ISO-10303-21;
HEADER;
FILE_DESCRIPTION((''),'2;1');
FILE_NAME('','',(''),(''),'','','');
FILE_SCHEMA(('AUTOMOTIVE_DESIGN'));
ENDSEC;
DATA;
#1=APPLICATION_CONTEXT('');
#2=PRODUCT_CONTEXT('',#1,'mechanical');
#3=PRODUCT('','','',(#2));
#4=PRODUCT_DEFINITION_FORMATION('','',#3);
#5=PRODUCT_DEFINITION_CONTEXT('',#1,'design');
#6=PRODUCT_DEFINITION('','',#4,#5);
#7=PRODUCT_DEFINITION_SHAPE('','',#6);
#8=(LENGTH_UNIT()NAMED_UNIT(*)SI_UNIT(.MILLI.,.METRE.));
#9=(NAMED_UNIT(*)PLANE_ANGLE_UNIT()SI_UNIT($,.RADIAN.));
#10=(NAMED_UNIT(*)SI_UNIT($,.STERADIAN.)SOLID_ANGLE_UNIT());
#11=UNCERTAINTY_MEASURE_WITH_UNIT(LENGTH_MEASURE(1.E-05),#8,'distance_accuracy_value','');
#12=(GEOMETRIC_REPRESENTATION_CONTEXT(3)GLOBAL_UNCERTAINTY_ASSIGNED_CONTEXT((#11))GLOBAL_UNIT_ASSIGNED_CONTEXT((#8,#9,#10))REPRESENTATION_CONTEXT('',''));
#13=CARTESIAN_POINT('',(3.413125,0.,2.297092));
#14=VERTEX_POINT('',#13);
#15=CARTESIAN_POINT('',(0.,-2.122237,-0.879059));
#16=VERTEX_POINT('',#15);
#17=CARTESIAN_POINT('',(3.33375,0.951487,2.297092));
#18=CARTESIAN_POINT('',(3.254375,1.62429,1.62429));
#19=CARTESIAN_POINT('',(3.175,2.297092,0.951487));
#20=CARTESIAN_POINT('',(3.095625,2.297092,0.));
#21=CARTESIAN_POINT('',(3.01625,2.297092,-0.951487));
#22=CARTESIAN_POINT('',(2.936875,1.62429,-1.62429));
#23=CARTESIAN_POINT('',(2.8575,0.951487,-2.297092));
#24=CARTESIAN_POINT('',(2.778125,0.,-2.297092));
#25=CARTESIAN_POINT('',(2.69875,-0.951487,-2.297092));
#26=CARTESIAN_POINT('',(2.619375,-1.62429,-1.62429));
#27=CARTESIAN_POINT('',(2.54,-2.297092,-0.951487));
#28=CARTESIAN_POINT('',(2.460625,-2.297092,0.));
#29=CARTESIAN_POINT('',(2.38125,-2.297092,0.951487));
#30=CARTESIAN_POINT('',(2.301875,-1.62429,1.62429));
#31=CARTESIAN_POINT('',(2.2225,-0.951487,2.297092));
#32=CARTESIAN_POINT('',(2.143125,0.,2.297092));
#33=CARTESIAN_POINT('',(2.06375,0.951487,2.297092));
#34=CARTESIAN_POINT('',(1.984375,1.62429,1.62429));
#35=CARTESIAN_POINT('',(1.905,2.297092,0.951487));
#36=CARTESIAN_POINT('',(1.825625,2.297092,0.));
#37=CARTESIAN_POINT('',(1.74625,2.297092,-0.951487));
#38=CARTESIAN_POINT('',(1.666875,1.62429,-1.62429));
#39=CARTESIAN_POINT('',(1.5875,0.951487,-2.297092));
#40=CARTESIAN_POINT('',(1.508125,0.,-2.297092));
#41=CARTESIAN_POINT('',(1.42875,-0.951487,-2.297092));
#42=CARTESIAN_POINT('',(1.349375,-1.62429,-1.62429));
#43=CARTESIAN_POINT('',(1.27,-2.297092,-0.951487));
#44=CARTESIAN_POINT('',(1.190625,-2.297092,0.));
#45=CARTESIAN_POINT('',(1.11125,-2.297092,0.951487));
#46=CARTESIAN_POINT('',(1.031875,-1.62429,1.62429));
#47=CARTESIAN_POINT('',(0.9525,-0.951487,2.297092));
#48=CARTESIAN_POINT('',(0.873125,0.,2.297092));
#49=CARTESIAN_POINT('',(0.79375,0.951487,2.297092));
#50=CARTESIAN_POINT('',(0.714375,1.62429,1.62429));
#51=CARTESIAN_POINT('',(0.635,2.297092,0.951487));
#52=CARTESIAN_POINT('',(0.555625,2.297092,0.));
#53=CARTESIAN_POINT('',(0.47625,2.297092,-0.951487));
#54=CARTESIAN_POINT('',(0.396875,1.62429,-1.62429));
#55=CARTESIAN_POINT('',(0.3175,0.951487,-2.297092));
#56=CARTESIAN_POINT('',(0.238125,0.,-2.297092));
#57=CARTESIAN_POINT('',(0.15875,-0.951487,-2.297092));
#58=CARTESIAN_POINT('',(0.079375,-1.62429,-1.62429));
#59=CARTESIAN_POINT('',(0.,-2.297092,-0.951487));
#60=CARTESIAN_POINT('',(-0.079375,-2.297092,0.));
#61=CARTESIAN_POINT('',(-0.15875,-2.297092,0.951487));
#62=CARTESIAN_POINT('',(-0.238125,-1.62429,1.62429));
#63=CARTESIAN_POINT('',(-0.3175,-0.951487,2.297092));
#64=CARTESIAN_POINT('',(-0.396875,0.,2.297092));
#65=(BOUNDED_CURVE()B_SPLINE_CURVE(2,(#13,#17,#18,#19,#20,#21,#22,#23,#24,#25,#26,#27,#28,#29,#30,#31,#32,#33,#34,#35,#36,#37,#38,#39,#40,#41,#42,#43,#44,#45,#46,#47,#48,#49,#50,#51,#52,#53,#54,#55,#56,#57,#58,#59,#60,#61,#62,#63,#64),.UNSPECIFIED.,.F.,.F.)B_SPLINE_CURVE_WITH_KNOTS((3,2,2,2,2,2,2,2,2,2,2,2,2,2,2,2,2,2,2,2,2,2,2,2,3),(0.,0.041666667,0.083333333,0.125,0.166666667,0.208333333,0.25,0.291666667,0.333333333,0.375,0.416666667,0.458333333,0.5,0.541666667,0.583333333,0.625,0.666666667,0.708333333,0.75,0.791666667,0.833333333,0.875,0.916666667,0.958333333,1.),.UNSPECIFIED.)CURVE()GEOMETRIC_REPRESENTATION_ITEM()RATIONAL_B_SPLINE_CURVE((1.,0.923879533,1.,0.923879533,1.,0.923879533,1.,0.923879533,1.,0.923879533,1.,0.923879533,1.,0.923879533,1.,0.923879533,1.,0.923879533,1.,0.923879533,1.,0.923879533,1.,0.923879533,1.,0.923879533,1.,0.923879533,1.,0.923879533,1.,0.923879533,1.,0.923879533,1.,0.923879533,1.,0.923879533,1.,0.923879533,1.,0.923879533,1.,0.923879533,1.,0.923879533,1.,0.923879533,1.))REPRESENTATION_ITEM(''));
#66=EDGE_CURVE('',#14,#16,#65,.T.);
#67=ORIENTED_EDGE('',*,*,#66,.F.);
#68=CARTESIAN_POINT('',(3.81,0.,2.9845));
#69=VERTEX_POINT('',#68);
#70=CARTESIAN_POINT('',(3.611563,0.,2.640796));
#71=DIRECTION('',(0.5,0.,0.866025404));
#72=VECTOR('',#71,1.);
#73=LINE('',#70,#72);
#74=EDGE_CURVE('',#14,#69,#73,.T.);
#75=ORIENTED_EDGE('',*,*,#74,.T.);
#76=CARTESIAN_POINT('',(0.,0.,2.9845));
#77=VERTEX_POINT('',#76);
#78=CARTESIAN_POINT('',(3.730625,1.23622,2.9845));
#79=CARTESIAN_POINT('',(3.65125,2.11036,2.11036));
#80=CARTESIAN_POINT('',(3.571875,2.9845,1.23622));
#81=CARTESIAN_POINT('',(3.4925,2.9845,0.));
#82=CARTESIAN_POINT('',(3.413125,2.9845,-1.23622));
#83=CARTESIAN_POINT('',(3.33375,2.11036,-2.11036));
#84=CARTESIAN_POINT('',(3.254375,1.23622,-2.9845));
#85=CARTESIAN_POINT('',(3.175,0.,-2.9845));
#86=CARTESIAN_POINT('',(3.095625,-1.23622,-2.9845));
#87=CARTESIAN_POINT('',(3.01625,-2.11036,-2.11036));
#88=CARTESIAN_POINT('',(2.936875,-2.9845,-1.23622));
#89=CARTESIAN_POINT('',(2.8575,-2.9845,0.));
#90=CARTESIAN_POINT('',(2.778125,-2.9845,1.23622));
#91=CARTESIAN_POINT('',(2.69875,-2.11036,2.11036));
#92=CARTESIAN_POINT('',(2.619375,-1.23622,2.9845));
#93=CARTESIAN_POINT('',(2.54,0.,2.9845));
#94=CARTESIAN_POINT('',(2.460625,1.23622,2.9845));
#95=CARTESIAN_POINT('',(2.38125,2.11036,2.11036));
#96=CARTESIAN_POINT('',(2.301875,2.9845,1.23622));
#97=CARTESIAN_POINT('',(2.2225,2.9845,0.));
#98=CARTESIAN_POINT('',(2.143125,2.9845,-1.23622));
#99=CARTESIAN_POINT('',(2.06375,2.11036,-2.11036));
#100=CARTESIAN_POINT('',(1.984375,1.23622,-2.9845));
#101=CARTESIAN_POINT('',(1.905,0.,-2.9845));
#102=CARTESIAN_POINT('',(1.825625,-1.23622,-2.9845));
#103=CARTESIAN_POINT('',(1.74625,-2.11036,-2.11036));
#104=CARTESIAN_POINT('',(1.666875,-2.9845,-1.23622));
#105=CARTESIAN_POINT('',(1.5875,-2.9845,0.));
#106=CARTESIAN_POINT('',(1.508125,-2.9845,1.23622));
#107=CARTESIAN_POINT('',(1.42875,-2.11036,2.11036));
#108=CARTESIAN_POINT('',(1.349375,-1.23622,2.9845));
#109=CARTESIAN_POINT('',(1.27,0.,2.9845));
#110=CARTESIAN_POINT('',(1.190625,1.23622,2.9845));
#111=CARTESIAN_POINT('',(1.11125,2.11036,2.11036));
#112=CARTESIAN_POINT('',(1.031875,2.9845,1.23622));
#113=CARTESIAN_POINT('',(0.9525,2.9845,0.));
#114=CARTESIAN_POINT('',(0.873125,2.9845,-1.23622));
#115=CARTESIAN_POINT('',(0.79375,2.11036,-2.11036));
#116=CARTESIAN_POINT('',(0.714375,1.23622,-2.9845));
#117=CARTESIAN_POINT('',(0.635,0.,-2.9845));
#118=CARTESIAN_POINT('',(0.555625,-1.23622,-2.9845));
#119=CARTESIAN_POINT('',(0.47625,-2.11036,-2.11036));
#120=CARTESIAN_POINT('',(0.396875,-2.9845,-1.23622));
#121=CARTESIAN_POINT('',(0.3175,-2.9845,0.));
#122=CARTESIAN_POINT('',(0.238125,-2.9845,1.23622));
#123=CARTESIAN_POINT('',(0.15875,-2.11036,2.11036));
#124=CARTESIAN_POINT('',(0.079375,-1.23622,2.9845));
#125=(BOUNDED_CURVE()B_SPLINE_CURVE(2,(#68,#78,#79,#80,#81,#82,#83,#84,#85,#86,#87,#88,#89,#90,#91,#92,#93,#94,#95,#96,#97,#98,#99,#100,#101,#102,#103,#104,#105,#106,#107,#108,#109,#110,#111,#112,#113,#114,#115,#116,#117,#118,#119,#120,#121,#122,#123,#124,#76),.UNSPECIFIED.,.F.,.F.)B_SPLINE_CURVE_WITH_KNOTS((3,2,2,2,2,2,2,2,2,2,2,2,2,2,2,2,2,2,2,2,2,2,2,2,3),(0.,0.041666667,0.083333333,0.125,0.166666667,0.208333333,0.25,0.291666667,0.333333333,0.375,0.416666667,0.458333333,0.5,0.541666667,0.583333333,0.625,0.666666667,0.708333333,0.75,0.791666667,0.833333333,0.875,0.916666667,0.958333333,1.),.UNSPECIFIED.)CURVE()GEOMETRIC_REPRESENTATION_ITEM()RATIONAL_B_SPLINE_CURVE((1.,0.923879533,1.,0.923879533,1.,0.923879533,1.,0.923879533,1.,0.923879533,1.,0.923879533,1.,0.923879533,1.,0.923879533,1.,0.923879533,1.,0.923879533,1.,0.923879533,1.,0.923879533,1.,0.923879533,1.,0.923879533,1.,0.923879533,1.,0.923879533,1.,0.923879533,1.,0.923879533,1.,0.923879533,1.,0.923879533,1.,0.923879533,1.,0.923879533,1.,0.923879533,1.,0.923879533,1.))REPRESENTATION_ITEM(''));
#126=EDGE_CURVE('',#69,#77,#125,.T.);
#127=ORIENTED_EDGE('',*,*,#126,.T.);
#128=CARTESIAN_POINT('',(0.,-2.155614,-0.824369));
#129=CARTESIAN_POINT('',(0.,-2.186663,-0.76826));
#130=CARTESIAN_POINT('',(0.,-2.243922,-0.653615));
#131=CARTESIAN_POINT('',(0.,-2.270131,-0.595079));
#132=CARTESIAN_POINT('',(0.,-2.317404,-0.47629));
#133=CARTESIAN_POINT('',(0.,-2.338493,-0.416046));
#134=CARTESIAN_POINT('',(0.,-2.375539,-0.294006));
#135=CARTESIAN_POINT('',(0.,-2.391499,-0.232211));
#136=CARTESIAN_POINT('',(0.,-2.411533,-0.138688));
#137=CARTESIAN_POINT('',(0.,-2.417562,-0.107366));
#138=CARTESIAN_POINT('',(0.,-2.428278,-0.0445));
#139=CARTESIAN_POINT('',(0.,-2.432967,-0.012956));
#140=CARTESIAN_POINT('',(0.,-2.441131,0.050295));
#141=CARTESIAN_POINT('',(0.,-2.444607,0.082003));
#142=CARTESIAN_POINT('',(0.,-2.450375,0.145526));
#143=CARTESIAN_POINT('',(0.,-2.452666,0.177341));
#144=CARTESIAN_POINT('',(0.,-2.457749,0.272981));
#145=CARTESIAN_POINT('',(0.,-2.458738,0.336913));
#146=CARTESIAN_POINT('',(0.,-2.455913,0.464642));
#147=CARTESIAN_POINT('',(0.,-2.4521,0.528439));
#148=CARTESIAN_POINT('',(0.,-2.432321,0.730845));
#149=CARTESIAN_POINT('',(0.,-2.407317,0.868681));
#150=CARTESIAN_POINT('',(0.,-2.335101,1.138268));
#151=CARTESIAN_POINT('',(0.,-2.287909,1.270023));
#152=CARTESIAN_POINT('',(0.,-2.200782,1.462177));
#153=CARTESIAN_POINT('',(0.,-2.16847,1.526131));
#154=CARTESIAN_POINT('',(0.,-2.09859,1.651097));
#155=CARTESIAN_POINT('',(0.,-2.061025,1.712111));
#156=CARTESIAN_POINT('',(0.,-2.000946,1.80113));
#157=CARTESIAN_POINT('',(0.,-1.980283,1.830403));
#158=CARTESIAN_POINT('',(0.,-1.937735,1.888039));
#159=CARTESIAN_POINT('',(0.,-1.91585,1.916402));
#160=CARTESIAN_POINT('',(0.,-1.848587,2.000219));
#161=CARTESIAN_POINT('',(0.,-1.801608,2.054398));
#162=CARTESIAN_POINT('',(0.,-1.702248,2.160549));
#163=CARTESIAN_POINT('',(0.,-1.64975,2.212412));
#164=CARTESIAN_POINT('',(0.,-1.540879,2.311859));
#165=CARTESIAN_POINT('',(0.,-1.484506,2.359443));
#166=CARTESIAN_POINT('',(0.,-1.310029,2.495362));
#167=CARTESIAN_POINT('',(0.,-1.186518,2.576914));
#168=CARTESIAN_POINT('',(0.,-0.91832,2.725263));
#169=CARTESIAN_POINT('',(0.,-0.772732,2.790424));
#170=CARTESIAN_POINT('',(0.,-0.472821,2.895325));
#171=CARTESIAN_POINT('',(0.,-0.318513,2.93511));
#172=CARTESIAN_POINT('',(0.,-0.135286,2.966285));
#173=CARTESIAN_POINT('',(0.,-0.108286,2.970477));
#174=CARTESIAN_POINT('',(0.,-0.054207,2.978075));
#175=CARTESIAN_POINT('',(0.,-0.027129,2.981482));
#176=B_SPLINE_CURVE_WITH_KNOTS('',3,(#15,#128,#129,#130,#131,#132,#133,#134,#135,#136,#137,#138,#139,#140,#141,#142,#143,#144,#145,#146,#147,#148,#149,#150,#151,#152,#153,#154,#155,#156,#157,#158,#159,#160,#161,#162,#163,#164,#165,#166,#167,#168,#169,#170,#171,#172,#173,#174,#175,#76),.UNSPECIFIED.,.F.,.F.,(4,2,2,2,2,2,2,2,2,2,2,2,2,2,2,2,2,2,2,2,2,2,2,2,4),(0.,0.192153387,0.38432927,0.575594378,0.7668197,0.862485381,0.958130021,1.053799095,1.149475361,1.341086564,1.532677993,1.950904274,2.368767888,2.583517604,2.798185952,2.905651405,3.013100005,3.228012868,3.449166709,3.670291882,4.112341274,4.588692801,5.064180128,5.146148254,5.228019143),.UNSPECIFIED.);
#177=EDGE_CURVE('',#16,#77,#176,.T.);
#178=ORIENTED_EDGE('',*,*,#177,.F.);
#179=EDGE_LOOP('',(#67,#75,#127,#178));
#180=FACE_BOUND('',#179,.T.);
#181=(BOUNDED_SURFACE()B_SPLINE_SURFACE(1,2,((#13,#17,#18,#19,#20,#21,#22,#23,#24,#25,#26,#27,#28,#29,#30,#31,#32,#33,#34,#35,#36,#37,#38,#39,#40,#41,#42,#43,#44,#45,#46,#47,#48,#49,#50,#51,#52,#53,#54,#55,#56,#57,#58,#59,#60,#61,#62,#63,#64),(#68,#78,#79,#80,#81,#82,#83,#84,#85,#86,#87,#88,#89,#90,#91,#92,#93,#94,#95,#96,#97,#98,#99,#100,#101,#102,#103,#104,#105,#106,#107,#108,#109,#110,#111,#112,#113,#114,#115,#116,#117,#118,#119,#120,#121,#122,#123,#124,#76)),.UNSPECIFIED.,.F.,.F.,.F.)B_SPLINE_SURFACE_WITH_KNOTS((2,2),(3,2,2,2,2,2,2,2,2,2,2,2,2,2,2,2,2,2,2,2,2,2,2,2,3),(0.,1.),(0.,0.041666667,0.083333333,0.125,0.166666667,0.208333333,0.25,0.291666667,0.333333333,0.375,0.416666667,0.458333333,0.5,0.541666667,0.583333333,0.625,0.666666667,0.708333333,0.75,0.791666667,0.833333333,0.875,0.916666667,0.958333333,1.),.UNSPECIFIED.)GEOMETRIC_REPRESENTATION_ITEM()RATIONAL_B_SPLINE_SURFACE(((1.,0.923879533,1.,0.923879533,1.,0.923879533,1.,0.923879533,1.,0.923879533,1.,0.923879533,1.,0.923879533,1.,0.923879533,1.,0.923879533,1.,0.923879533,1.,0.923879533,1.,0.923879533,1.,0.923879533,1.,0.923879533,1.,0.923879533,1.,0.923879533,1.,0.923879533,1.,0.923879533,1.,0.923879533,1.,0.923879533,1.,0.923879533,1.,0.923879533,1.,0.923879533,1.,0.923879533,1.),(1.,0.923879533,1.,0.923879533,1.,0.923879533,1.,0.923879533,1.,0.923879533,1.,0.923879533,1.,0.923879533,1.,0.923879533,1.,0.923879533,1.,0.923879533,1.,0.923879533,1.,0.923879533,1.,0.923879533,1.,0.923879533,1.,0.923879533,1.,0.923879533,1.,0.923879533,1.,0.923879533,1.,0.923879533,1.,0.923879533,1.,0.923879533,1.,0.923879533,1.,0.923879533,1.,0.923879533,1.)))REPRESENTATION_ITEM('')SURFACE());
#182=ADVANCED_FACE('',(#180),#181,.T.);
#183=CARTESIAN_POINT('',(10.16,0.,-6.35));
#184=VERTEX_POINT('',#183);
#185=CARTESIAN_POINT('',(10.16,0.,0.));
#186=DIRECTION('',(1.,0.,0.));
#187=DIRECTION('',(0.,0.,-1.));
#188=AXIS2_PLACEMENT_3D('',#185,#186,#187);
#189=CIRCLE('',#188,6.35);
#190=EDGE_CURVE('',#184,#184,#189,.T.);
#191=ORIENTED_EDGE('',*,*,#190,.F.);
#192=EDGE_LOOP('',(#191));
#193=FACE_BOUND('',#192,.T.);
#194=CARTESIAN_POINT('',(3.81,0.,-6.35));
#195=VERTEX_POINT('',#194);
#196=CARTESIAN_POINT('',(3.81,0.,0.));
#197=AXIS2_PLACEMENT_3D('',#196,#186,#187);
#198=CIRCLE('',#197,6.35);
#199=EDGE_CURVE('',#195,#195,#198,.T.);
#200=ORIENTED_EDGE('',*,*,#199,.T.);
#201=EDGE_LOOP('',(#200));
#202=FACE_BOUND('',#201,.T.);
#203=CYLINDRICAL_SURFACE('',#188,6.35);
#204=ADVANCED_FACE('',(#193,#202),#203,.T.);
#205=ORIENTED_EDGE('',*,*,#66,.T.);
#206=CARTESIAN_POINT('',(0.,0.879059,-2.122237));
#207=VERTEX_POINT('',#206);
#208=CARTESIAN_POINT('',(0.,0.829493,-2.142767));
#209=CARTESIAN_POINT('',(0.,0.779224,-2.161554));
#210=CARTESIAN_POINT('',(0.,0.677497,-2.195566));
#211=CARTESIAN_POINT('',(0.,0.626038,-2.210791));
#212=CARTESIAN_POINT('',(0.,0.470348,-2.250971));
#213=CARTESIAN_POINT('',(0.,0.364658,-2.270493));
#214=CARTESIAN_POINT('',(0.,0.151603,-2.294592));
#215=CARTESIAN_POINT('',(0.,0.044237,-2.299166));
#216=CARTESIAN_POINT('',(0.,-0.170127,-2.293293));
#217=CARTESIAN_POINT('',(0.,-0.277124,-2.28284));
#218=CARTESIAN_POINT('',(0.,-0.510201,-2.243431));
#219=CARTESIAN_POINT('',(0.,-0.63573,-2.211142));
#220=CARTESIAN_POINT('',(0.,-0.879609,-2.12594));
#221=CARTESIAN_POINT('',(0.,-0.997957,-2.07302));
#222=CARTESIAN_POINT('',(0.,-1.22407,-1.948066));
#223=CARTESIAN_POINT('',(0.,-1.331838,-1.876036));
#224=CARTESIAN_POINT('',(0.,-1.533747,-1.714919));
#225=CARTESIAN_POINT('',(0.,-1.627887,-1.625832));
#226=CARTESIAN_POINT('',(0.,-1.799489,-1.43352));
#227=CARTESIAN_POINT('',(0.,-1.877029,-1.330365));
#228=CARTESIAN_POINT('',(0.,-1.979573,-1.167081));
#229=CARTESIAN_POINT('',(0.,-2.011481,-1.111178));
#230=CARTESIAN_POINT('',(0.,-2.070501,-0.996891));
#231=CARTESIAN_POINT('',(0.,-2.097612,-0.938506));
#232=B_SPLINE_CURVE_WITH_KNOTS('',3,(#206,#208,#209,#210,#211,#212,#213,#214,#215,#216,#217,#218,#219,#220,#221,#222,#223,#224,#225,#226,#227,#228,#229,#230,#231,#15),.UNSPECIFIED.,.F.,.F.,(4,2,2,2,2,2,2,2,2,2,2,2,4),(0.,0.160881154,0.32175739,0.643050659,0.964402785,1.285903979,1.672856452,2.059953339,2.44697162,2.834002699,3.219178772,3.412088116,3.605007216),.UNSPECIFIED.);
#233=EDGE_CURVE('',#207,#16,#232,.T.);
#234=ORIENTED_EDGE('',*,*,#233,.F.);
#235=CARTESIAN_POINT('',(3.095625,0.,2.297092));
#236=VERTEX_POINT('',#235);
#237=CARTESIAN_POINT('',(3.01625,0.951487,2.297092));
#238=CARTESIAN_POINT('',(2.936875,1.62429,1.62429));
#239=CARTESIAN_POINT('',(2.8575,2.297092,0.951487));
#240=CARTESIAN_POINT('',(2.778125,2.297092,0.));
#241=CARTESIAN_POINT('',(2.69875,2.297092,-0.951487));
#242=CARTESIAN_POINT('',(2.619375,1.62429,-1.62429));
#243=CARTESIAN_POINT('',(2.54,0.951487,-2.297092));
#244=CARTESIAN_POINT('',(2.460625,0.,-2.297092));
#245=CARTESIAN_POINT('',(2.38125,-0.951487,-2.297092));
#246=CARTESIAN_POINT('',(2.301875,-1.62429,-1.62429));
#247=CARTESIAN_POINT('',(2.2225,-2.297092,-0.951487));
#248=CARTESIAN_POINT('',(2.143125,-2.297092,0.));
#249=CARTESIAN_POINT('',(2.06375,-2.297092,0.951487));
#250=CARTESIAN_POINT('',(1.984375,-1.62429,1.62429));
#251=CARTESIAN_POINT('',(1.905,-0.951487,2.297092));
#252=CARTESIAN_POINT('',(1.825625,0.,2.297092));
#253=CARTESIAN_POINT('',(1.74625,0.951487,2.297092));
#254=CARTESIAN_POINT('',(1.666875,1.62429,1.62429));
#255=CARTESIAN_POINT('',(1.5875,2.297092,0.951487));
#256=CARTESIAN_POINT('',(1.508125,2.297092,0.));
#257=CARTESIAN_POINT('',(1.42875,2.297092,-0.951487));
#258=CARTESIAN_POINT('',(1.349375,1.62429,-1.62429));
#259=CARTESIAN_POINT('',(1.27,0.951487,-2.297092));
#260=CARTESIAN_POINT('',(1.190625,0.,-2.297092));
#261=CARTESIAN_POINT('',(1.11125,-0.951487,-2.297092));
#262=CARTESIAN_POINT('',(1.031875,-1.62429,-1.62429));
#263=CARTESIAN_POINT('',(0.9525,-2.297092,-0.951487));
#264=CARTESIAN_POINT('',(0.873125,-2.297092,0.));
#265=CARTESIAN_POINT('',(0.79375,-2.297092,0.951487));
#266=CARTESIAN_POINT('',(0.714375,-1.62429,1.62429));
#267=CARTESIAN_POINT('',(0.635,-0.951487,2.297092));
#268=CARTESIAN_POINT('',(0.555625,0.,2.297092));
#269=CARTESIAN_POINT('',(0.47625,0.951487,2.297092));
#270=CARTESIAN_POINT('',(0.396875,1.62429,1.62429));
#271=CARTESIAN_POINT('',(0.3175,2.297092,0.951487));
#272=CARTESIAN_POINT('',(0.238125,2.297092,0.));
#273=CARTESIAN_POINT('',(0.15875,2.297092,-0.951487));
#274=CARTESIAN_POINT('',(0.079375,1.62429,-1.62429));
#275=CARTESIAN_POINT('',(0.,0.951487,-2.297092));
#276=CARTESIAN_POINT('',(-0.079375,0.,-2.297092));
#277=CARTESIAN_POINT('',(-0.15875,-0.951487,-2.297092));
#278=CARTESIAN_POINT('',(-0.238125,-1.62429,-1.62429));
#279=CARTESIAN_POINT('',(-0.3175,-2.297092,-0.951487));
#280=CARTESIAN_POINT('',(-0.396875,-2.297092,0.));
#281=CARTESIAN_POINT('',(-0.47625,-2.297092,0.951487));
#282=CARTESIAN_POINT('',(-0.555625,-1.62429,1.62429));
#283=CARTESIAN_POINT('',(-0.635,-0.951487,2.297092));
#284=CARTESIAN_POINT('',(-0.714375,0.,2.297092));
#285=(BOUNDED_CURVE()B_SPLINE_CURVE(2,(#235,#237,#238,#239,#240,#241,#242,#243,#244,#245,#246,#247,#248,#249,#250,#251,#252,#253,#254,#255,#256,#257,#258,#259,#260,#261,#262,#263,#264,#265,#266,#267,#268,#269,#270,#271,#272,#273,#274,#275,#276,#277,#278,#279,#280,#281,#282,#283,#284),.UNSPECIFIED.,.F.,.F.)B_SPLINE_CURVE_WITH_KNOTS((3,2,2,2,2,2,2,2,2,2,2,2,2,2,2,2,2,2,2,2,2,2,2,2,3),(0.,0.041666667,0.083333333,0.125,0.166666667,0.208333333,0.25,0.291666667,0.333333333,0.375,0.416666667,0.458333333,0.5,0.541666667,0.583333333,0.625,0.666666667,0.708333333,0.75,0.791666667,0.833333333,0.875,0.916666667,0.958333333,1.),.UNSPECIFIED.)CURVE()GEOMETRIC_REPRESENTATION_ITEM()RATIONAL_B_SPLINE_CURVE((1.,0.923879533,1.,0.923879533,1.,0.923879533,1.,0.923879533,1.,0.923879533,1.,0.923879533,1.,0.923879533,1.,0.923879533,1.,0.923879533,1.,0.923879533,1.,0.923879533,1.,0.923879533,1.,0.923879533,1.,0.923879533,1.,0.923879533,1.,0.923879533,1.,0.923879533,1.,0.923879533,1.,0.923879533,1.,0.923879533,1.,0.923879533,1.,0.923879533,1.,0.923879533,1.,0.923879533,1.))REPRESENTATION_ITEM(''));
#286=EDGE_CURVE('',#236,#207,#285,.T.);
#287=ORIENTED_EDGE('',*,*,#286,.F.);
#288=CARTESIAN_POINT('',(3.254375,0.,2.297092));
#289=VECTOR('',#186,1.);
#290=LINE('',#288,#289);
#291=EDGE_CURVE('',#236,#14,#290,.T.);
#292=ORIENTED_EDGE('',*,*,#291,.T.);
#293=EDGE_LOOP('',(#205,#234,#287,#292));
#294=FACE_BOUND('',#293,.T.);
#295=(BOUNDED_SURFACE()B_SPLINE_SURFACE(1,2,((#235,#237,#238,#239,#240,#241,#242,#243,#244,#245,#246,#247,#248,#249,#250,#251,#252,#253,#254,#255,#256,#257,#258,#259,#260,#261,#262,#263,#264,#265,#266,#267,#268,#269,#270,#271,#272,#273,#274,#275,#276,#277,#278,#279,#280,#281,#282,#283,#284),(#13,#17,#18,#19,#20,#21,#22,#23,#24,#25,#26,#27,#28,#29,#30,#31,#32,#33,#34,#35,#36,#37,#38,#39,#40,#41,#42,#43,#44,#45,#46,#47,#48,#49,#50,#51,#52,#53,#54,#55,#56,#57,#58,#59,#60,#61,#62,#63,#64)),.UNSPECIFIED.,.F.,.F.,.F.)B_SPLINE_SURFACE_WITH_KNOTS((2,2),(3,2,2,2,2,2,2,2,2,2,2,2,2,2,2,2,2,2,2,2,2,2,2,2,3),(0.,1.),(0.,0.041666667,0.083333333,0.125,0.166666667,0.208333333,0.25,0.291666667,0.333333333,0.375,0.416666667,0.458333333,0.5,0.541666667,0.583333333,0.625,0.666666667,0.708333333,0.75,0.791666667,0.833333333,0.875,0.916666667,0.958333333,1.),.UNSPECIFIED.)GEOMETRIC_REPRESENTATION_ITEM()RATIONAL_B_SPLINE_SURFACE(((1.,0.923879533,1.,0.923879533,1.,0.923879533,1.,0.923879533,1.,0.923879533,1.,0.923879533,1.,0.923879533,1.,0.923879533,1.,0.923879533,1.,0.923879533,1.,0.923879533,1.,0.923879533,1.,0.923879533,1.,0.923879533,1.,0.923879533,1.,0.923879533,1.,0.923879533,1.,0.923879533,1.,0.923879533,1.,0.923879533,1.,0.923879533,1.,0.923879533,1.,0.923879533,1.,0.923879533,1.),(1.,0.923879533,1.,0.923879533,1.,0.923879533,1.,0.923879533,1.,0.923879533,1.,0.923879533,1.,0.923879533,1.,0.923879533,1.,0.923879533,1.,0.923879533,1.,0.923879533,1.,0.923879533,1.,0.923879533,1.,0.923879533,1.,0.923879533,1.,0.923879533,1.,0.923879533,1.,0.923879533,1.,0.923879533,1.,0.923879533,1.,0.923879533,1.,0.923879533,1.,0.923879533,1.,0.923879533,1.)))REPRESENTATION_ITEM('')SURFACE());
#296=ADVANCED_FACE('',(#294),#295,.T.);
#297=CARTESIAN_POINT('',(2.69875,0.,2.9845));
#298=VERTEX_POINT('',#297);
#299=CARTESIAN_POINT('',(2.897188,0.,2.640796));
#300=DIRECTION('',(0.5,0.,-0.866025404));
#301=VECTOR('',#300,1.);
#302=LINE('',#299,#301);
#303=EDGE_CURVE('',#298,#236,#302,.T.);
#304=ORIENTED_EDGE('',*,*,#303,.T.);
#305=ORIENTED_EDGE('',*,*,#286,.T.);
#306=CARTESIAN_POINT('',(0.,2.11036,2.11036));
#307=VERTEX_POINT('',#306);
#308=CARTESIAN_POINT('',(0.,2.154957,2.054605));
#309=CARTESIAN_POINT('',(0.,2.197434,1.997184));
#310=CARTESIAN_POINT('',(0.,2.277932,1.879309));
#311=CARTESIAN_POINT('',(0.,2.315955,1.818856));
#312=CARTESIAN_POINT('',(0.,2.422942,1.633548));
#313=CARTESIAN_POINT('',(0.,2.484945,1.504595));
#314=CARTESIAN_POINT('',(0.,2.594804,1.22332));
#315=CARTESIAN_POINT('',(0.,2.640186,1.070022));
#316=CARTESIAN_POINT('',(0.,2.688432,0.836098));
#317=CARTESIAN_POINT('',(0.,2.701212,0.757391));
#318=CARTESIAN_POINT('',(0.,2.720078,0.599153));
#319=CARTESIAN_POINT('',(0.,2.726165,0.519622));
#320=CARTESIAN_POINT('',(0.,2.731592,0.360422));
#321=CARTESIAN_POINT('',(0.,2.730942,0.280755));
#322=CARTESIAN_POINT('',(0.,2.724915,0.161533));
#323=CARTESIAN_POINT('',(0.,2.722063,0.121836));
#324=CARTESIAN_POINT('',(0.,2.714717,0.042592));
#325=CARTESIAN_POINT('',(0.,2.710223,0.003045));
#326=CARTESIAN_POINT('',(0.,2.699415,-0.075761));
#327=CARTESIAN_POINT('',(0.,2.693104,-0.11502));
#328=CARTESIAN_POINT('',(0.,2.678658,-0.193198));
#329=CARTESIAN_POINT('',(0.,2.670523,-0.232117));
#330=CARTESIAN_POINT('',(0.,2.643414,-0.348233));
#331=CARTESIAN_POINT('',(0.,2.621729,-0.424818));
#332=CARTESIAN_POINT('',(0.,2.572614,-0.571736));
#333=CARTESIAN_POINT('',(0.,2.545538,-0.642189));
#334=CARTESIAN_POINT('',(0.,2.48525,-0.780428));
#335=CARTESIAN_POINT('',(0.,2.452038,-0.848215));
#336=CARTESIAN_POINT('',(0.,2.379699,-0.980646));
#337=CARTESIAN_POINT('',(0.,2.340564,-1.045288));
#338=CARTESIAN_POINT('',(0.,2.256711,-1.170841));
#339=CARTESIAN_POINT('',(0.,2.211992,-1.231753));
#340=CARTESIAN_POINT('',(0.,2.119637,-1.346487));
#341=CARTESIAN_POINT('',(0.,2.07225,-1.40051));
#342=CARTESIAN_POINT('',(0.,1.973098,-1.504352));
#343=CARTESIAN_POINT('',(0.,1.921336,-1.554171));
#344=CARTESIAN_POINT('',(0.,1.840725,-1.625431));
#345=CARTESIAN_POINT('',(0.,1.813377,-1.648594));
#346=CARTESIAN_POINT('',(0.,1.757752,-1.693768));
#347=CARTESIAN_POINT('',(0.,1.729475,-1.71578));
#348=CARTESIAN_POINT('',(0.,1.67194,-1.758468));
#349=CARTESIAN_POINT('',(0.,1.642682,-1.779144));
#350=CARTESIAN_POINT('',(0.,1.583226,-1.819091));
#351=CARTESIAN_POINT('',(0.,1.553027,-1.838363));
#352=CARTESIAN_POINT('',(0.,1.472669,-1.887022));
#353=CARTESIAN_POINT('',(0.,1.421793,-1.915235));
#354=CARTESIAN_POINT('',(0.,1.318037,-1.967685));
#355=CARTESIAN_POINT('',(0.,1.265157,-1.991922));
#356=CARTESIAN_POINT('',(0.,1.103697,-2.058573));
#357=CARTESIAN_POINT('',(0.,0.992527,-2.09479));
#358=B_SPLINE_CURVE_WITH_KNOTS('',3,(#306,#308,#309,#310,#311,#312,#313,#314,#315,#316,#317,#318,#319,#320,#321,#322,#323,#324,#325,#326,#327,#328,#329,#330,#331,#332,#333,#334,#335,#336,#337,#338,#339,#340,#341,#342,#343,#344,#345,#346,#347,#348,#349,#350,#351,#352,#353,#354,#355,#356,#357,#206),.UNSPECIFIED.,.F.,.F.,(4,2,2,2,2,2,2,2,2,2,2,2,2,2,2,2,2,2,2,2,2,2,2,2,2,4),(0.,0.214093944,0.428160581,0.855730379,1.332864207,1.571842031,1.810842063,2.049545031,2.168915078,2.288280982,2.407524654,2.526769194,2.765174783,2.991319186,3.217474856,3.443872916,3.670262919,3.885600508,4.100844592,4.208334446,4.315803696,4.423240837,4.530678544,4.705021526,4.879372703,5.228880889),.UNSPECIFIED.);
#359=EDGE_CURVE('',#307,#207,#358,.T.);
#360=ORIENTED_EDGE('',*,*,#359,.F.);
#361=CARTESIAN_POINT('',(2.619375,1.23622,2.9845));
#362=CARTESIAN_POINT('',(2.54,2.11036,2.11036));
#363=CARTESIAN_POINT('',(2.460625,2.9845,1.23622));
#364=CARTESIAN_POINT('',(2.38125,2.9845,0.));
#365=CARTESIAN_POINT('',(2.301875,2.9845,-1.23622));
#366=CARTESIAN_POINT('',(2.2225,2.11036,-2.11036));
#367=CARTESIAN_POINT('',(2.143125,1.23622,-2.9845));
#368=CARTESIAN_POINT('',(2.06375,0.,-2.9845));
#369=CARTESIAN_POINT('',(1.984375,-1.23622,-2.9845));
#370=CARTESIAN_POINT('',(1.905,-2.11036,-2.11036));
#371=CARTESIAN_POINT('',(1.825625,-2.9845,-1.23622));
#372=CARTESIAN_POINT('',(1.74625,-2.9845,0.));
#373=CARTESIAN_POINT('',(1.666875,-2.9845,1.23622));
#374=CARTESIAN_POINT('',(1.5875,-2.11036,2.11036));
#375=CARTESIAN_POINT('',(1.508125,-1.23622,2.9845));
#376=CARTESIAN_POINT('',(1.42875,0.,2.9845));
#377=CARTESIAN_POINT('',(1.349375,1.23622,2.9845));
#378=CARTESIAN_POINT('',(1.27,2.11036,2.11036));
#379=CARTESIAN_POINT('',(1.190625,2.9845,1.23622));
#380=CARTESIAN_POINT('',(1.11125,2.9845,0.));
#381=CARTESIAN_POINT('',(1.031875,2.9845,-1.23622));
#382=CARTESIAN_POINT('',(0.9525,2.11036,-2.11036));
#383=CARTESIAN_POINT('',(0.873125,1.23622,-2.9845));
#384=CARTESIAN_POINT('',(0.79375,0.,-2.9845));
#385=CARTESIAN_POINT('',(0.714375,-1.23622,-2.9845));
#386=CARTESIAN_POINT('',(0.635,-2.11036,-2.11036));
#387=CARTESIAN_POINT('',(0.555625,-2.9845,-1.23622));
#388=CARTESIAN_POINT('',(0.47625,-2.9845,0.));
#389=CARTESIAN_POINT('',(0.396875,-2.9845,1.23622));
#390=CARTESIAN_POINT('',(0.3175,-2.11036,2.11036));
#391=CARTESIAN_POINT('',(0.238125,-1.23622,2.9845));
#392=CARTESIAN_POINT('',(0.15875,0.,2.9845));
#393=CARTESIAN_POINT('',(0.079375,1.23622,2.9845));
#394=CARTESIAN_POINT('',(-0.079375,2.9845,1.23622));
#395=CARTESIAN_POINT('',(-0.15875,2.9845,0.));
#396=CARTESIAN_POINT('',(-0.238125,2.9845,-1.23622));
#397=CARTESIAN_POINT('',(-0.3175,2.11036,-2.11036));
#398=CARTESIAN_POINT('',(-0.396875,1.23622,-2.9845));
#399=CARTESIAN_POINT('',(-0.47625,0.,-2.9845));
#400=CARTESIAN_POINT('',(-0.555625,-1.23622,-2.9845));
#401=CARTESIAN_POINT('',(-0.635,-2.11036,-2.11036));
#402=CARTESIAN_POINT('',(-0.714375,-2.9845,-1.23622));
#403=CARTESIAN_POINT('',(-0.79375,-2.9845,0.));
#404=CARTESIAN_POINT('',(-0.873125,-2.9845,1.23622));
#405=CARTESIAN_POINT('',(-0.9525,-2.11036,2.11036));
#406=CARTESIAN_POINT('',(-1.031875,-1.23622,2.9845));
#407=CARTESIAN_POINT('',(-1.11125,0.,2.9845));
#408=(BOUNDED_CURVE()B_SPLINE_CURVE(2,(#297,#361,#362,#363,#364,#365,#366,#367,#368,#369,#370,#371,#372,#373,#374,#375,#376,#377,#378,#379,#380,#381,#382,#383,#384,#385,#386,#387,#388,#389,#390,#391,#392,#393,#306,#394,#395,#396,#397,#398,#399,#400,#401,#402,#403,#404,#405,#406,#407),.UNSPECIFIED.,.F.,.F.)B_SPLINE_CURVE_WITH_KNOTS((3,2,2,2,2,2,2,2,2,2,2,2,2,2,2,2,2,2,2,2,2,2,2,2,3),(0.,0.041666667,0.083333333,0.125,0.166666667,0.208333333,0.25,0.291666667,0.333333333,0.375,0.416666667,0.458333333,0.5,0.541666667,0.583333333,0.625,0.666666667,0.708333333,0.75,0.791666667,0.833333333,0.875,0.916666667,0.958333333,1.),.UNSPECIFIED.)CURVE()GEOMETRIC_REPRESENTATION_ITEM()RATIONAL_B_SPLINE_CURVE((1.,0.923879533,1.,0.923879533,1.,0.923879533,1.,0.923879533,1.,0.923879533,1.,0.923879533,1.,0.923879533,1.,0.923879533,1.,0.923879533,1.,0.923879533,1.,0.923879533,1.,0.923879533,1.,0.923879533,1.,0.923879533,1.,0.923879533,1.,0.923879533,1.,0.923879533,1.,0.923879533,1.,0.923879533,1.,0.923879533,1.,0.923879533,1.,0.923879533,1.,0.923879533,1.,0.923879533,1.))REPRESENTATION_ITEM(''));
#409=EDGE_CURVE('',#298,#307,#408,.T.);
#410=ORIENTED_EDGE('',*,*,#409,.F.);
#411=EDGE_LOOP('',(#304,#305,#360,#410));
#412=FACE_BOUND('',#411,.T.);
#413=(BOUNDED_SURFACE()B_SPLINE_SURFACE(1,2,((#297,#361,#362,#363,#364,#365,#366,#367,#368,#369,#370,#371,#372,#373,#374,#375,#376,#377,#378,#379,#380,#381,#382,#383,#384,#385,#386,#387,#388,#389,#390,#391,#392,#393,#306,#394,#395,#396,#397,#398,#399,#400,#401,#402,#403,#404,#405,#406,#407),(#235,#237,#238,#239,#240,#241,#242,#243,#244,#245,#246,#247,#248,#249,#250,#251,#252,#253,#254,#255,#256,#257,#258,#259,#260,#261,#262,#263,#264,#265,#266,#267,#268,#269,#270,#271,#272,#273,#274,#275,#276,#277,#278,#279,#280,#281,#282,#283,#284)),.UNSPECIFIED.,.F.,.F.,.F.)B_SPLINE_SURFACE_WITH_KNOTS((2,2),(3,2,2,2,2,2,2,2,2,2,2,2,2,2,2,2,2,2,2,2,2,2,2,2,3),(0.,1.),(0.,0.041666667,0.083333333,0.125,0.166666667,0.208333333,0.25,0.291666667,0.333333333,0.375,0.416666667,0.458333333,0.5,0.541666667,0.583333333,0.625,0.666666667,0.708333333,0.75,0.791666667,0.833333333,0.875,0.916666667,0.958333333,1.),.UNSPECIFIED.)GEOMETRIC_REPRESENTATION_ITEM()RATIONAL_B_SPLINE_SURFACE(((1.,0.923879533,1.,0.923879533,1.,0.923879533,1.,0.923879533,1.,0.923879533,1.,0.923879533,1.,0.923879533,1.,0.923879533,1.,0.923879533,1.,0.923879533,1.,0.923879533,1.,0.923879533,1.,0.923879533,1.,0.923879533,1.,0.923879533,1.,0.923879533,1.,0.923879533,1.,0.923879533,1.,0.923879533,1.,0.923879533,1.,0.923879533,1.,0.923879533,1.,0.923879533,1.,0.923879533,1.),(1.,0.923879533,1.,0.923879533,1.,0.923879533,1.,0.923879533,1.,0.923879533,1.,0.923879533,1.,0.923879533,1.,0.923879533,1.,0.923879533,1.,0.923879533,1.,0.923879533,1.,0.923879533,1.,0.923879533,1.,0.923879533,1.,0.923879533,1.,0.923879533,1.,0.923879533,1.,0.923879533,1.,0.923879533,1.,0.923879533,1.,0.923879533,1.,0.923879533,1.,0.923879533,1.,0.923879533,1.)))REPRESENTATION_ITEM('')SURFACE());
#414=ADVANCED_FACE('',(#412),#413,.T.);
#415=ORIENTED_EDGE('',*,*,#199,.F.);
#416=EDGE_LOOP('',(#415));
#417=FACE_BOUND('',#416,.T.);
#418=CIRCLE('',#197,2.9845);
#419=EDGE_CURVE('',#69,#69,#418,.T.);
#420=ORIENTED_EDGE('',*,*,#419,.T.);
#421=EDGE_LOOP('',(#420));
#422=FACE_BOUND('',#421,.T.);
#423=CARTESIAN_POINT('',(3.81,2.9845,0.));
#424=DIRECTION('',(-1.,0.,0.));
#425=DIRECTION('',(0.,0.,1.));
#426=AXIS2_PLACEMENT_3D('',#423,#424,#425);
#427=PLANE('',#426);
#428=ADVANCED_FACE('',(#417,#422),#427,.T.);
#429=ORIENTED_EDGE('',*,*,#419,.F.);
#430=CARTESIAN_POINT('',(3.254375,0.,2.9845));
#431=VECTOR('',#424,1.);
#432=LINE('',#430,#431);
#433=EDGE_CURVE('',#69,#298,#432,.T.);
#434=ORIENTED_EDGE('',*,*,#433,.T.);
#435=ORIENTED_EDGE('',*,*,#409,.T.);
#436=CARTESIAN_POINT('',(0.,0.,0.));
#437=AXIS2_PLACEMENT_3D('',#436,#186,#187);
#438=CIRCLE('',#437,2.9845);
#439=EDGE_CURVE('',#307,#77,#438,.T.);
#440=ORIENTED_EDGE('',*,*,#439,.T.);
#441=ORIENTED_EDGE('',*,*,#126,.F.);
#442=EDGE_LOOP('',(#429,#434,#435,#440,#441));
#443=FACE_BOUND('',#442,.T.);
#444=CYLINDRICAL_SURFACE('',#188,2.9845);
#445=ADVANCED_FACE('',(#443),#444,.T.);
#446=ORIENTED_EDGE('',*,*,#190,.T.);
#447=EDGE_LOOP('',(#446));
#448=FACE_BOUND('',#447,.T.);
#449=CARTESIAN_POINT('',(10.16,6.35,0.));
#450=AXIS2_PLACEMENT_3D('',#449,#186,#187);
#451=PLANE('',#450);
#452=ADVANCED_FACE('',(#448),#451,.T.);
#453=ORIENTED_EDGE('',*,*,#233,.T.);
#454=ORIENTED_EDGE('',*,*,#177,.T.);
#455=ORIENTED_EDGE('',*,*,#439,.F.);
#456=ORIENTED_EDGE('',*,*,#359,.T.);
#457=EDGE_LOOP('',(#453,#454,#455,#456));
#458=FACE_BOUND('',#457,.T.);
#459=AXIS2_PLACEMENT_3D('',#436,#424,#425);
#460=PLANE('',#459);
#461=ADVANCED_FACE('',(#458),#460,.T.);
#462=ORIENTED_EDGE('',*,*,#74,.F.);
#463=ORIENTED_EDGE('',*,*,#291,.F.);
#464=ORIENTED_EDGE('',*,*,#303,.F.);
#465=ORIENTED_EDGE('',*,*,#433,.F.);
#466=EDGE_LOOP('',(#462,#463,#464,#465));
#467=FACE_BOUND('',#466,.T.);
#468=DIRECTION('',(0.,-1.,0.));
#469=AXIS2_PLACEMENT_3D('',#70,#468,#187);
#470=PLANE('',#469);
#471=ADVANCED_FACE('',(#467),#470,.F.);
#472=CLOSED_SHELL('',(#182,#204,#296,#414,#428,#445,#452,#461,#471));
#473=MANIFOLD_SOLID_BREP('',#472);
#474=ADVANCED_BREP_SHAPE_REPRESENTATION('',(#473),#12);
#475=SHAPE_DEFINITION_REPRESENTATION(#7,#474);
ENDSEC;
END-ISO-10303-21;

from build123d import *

# Parameters (mm, degrees)
THREAD1_PITCH = 1.27


with BuildPart() as part:
    # Sketch1 → Revolve1 (revolve)
    with BuildSketch(Plane.XY, mode=Mode.PRIVATE) as revolve1_sk:
        Polygon((0, 0), (0, 2.9845), (3.81, 2.9845), (3.81, 6.35), (10.16, 6.35), (10.16, 0), align=None)
    revolve(revolve1_sk.sketch.rotate(Axis((10.16, 0, 0), (-1, 0, 0)), 90), axis=Axis((10.16, 0, 0), (-1, 0, 0)))

    # Thread1: the profile of Thread Profile1 profile screwed along a right-hand helix of 3 turns, 8 arcs to a turn; built about Z, then put on its axis
    thread1_z = Axis((0, 0, 0), (0, 0, 1))
    thread1_corners = [(2.9848, 0, -0.000173205), (2.9848, 0, 1.111423202), (2.297092339, 0, 0.714374998), (2.297092339, 0, 0.396874998)]
    with BuildLine(mode=Mode.PRIVATE) as thread1_profile:
        Line(thread1_corners[0], thread1_corners[1])
        Line(thread1_corners[1], thread1_corners[2])
        Line(thread1_corners[2], thread1_corners[3])
        Line(thread1_corners[3], thread1_corners[0])
    thread1_cap = Face(thread1_profile.wire())
    thread1_turn_angles = [0, 22.5, 45, 67.5, 90, 112.5, 135, 157.5, 180, 202.5, 225, 247.5, 270, 292.5, 315, 337.5, 360]
    thread1_turn_weights = [1, 0.9238795325112867, 1, 0.9238795325112867, 1, 0.9238795325112867, 1, 0.9238795325112867, 1, 0.9238795325112867, 1, 0.9238795325112867, 1, 0.9238795325112867, 1, 0.9238795325112867, 1]
    thread1_turn_rails = [Edge.make_bspline([Vector(p[0], p[1], 0).rotate(thread1_z, thread1_turn_angles[k]) / thread1_turn_weights[k] + Vector(0, 0, p[2] + THREAD1_PITCH * thread1_turn_angles[k] / 360) for k in range(17)], [0, 0, 0, 1, 1, 2, 2, 3, 3, 4, 4, 5, 5, 6, 6, 7, 7, 8, 8, 8], 2, thread1_turn_weights) for p in thread1_corners]
    thread1_turn_sides = [Face.make_surface_from_curves(thread1_turn_rails[p[0]], thread1_turn_rails[p[1]]) for p in [(0, 1), (1, 2), (2, 3), (3, 0)]]
    thread1 = Plane(origin=(3.81, 0, 0), x_dir=(0, 0, 1), z_dir=(-1, 0, 0)) * Solid(Shell([*[p.moved(Location((0, 0, THREAD1_PITCH * i))) for i in range(3) for p in thread1_turn_sides], thread1_cap, thread1_cap.rotate(thread1_z, 1080).moved(Location((0, 0, THREAD1_PITCH * 1080 / 360)))]))
    add(thread1, mode=Mode.SUBTRACT)


solid = part.part
